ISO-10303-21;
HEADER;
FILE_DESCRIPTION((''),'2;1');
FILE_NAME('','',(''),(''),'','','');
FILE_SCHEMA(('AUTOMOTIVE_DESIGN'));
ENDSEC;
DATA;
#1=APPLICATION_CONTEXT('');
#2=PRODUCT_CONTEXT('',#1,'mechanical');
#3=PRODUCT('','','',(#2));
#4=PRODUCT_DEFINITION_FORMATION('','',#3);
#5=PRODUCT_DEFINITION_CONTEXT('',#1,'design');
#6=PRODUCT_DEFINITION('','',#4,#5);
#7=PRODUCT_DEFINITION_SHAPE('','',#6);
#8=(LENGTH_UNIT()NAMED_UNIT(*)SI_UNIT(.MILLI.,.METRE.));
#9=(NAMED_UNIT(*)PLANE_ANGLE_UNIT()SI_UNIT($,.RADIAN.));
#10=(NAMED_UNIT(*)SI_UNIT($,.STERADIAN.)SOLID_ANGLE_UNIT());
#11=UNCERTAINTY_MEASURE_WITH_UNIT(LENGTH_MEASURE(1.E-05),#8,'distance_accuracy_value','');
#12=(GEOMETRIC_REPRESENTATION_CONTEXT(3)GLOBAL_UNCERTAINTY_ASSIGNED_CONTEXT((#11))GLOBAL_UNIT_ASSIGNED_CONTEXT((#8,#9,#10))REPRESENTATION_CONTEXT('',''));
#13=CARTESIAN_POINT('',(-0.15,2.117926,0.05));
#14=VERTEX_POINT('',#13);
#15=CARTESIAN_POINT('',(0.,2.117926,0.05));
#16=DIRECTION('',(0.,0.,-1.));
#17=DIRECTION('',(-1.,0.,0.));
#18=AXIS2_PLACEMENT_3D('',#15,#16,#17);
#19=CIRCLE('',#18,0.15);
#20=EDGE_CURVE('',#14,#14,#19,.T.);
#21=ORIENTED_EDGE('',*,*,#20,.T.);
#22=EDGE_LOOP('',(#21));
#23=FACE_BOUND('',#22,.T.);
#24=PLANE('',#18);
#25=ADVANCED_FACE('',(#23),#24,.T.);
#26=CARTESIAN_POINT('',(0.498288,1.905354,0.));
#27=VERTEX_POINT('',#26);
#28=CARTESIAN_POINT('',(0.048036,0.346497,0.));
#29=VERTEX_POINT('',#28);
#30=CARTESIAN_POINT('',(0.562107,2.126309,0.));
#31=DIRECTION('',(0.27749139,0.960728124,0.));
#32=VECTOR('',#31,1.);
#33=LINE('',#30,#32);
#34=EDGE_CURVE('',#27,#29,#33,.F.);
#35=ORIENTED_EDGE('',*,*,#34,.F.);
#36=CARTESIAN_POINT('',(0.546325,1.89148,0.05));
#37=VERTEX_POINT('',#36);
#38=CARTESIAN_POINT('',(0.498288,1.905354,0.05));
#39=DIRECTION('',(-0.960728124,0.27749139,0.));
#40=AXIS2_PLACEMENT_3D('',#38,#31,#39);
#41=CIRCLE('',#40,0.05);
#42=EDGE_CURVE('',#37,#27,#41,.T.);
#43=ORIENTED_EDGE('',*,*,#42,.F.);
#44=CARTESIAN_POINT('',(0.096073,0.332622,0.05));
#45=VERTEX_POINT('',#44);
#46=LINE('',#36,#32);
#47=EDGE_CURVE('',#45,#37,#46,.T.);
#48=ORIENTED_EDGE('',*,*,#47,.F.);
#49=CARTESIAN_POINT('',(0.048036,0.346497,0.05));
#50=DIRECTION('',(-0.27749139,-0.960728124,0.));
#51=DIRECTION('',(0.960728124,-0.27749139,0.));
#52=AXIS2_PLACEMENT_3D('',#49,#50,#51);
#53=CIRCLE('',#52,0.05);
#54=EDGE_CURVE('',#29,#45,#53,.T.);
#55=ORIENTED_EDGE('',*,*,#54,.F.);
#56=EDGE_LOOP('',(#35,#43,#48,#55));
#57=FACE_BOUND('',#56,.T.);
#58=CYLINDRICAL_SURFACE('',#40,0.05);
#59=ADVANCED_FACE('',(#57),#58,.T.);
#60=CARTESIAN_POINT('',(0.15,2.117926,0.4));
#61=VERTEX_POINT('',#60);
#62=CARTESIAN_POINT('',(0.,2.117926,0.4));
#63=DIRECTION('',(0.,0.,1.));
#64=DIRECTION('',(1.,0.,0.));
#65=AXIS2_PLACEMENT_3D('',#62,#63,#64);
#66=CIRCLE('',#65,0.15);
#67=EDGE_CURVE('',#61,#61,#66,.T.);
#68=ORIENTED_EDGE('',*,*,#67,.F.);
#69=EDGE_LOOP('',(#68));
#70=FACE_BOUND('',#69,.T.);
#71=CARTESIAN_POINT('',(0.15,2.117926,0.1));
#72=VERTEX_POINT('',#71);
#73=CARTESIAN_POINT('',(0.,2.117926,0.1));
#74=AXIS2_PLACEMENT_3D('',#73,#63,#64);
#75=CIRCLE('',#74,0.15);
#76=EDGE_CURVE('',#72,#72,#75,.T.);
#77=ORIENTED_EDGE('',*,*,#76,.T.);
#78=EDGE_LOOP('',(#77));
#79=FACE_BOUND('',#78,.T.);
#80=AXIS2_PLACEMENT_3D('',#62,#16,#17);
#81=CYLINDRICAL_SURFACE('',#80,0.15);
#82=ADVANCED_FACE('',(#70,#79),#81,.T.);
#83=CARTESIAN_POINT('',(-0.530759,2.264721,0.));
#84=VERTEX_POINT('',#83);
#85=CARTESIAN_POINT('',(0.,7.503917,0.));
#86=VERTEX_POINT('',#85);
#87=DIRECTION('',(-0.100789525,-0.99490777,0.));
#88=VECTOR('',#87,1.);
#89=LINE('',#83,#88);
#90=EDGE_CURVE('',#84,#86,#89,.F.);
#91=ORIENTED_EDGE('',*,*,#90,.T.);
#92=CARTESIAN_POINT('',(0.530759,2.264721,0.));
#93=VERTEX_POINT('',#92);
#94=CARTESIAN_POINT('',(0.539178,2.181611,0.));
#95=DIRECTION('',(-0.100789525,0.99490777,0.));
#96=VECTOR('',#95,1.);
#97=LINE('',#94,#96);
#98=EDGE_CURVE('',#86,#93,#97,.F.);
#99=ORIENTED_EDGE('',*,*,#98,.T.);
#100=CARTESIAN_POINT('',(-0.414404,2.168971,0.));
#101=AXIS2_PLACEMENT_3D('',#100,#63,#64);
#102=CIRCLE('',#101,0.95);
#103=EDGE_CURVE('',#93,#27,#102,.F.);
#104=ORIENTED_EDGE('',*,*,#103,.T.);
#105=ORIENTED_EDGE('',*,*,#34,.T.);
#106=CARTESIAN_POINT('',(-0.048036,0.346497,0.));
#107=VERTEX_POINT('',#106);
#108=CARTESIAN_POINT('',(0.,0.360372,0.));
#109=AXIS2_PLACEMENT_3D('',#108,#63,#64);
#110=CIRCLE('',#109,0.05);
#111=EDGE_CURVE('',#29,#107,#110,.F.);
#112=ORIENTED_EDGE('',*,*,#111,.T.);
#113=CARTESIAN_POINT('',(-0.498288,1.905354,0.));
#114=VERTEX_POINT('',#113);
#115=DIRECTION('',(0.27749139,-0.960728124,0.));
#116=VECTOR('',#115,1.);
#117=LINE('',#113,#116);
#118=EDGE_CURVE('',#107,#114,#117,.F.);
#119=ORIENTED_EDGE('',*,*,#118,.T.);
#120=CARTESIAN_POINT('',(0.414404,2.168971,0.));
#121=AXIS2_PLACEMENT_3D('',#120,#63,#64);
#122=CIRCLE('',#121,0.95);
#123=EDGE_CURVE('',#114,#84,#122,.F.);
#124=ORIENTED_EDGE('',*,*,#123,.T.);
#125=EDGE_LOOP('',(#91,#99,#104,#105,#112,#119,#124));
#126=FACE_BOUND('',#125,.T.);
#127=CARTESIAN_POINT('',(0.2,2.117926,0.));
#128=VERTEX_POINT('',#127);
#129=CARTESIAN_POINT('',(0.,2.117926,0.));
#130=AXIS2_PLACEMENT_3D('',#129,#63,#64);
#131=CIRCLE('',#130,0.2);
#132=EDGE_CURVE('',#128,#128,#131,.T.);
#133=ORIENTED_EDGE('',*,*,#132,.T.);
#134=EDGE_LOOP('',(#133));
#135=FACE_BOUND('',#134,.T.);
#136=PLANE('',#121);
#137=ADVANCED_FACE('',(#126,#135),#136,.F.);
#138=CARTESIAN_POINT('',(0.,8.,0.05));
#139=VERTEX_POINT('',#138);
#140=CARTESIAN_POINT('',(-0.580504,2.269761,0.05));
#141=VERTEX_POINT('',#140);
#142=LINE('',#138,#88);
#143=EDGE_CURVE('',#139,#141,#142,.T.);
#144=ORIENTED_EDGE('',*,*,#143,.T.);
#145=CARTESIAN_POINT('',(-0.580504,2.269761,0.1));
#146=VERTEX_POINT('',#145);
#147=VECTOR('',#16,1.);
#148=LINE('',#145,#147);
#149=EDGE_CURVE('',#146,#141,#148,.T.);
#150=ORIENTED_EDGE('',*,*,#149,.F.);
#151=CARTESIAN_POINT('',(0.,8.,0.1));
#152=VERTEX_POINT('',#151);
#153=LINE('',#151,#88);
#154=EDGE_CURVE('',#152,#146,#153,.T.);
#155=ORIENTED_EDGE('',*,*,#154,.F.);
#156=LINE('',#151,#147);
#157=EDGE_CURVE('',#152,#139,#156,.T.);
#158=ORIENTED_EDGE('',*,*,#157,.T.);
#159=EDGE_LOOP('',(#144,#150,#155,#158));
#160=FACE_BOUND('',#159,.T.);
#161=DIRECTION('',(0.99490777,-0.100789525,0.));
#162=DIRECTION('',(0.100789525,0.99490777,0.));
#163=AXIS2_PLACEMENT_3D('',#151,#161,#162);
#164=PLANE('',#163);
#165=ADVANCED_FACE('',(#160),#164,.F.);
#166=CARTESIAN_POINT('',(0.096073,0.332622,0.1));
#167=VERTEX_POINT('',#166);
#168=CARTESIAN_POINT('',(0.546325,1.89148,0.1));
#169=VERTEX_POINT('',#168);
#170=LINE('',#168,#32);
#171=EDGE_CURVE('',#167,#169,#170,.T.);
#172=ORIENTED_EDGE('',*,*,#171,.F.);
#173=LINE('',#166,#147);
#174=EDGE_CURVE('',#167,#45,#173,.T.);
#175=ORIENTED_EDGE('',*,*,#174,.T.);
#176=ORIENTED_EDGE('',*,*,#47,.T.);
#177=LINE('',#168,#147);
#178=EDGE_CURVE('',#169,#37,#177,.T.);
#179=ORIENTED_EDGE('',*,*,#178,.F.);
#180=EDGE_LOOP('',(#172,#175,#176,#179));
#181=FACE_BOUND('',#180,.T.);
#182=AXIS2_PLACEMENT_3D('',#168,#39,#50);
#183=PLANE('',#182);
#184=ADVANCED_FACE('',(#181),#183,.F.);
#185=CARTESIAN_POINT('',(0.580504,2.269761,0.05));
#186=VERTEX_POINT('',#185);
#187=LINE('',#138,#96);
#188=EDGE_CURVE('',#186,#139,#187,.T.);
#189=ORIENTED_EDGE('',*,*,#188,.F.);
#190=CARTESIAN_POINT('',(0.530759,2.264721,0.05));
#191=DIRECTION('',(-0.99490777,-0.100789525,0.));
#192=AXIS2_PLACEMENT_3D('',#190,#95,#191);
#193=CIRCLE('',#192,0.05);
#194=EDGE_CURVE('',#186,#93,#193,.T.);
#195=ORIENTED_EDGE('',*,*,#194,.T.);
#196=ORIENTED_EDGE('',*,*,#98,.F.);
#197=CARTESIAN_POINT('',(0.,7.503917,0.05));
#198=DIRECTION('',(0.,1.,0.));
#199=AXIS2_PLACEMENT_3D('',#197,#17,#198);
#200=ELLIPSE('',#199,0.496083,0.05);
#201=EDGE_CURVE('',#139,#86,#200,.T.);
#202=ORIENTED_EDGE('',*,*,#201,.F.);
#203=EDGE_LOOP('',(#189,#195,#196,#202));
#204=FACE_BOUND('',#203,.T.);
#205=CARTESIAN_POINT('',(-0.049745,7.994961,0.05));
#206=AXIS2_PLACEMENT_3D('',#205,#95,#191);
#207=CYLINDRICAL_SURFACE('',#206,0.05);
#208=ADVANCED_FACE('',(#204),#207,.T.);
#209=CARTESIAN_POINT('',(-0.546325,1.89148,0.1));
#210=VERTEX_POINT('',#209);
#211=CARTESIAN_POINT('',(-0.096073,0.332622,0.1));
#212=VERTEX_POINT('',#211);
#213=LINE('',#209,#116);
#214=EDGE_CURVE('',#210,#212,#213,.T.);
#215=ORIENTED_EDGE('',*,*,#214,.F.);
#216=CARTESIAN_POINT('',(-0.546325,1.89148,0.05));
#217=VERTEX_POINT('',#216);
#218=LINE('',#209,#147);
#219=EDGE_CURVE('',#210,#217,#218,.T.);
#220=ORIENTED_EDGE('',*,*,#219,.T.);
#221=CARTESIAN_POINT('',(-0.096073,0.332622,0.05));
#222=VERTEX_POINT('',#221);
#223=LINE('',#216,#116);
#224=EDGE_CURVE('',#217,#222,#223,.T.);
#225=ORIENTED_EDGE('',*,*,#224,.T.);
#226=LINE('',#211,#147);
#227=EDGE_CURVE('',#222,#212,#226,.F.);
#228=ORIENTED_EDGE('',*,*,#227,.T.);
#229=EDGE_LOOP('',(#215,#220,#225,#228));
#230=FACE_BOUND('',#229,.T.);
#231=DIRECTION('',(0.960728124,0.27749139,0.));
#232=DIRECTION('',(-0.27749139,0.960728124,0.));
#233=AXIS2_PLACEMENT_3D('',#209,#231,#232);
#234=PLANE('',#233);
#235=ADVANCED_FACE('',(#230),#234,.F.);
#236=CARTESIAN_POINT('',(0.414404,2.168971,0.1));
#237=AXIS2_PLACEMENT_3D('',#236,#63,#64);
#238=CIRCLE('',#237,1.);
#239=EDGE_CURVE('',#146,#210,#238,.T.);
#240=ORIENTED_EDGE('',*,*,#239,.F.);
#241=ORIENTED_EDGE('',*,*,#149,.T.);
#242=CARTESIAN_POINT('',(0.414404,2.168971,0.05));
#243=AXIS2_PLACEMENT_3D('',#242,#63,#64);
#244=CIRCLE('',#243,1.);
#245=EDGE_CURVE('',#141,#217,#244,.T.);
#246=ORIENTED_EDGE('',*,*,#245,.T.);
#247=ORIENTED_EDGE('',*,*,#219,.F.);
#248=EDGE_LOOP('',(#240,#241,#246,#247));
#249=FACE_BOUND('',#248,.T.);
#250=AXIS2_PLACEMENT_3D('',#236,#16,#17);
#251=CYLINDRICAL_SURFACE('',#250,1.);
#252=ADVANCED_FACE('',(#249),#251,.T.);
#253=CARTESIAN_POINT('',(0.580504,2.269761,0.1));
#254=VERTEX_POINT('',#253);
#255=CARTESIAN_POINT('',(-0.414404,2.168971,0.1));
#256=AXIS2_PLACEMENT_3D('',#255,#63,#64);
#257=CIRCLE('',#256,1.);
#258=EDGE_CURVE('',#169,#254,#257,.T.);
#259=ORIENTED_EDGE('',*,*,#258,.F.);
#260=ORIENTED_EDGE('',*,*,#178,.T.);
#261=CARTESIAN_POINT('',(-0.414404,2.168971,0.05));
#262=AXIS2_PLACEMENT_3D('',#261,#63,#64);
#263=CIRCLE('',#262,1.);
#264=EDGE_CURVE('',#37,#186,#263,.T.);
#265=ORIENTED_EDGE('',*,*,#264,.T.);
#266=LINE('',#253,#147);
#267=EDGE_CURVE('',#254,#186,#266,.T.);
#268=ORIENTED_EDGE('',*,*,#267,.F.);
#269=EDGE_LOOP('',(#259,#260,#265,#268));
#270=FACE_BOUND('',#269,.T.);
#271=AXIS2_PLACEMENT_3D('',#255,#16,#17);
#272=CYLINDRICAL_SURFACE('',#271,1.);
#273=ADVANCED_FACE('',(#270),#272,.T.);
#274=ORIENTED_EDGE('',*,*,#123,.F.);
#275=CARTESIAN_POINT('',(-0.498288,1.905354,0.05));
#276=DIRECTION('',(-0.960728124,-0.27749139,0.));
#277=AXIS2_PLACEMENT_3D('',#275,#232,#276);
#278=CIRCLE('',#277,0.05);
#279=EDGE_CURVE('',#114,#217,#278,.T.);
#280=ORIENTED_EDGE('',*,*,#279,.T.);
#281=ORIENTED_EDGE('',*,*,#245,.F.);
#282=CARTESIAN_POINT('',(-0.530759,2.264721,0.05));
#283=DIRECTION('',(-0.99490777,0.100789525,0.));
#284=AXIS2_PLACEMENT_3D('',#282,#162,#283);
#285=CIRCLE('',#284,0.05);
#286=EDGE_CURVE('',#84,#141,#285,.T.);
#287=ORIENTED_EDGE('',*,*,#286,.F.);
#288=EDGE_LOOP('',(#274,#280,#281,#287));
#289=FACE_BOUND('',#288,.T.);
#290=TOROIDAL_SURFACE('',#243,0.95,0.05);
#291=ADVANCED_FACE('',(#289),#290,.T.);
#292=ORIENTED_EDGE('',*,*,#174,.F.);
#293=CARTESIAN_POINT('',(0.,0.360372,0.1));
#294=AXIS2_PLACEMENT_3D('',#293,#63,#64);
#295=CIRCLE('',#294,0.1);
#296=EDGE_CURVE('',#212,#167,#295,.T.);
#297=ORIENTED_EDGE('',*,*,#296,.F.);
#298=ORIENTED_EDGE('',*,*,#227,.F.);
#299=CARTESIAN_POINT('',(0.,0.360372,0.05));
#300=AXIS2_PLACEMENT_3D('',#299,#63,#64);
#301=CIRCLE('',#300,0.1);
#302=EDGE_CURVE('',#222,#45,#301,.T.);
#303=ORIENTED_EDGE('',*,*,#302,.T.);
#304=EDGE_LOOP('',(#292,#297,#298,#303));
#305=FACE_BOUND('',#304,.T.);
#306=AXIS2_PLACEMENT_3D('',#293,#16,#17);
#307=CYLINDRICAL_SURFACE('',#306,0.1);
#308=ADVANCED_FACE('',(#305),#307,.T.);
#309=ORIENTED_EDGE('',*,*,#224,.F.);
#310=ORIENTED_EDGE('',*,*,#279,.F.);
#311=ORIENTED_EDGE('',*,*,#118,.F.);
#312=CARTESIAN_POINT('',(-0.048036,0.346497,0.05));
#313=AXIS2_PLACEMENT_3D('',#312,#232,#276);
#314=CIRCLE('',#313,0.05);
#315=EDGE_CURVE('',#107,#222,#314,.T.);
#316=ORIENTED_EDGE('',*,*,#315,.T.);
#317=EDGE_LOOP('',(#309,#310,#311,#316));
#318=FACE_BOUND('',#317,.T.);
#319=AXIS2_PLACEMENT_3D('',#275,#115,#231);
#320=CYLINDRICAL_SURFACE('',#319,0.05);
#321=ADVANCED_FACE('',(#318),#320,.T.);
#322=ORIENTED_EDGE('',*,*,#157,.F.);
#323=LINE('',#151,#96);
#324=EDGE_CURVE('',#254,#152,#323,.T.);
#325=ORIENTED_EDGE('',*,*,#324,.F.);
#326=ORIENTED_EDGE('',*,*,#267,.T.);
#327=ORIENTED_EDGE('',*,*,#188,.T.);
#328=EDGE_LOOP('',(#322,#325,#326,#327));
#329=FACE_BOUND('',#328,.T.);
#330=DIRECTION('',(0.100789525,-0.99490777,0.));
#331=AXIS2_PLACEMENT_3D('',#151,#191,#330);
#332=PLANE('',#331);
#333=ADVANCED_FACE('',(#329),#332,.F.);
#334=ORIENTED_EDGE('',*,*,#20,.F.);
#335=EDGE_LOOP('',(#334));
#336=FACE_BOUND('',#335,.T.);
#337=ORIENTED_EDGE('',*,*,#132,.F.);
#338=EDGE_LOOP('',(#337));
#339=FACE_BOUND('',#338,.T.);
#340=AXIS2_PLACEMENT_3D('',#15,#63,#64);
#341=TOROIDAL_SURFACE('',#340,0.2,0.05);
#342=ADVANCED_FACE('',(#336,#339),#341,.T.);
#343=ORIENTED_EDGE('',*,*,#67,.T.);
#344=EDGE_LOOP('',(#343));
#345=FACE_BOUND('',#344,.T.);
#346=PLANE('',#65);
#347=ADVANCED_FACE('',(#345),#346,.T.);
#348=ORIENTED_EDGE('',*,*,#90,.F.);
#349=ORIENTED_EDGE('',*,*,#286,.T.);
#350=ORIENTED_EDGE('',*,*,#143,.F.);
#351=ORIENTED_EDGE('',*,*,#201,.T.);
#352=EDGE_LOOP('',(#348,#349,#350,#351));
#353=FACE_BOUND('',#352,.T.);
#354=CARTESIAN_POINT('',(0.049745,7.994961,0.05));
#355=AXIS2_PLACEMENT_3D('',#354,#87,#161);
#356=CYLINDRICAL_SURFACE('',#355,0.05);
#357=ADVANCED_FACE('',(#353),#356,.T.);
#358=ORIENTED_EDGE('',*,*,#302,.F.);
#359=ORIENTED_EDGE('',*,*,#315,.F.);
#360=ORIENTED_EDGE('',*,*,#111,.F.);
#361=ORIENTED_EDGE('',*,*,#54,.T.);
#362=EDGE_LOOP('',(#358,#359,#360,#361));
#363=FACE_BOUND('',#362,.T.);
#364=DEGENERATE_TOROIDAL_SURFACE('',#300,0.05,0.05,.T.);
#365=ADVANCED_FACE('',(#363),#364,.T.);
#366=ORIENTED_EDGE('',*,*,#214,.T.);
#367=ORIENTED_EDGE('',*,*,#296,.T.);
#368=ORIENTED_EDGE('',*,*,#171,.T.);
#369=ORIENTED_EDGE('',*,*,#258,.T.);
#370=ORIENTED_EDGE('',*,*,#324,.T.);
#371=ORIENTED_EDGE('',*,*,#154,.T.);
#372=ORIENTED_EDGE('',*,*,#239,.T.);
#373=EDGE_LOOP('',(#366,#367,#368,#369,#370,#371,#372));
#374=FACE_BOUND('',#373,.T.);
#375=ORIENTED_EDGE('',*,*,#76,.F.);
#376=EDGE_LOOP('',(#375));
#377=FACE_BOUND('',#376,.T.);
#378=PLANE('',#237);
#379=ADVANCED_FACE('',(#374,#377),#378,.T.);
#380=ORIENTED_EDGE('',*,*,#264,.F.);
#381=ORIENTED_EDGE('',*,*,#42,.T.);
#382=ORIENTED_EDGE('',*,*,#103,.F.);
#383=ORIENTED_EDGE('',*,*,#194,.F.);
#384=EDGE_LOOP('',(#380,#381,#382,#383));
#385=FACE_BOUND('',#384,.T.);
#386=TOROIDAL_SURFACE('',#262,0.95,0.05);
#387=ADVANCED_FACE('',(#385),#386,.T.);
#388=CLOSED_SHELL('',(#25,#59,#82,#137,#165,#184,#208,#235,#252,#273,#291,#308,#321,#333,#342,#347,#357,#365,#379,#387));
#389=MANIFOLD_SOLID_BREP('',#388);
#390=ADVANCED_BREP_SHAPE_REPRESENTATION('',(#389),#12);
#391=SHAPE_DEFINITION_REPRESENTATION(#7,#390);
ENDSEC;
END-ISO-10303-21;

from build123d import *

# Parameters (mm, degrees)
EXTRUDE_1_DEPTH     = 0.1
SKETCH_2_R          = 0.15
EXTRUDE_2_DEPTH     = 0.3
FILLET_1_R          = 0.1
FILLET_3_R          = 0.05
SKETCH_3_R          = 0.15
CUT_EXTRUDE_1_DEPTH = 0.05
FILLET_4_R          = 0.05


with BuildPart() as part:
    # Эскиз1 → Бобышка-Вытянуть1 (new body)
    with BuildSketch(Plane.XY):
        with BuildLine():
            Line((0, 8), (-0.580504166, 2.26976061))
            ThreePointArc((-0.580504166, 2.26976061), (-0.58153919, 2.078982478), (-0.546324519, 1.891479695))
            Line((-0.546324519, 1.891479695), (0, 0))
            Line((0, 0), (0.546324519, 1.891479695))
            ThreePointArc((0.546324519, 1.891479695), (0.58153919, 2.078982478), (0.580504166, 2.26976061))
            Line((0.580504166, 2.26976061), (0, 8))
        make_face()
    extrude(amount=EXTRUDE_1_DEPTH)

    # Эскиз2 → Бобышка-Вытянуть2 (add)
    with BuildSketch(Plane.XY.offset(0.1)):
        with Locations((0, 2.117926147)):
            Circle(SKETCH_2_R)
    extrude(amount=EXTRUDE_2_DEPTH)

    # Скругление1
    fillet_1_edges = [part.edges().sort_by_distance(p)[0] for p in [
        (0, 0, 0.05),
    ]]
    fillet(fillet_1_edges, radius=FILLET_1_R)

    # Скругление3
    fillet_3_edges = [part.edges().sort_by_distance(p)[0] for p in [
        (0.321198666, 1.112051048, 0),
        (0, 0.260371541, 0),
        (-0.321198666, 1.112051048, 0),
        (-0.58153919, 2.078982478, 0),
        (-0.290252083, 5.134880305, 0),
        (0.290252083, 5.134880305, 0),
        (0.58153919, 2.078982478, 0),
    ]]
    fillet(fillet_3_edges, radius=FILLET_3_R)

    # Эскиз3 → Вырез-Вытянуть1 (cut)
    with BuildSketch(Plane(origin=(0, 0, 0), x_dir=(-1, 0, 0), z_dir=(0, 0, -1))):
        with Locations(Location((0, 2.117926147, 0), (0, 0, 180))):
            Circle(SKETCH_3_R)
    extrude(amount=-CUT_EXTRUDE_1_DEPTH, mode=Mode.SUBTRACT)

    # Скругление4
    fillet_4_edges = [part.edges().sort_by_distance(p)[0] for p in [
        (-0.15, 2.117926147, 0),
    ]]
    fillet(fillet_4_edges, radius=FILLET_4_R - 0.0001)  # a hair under: the kernel refuses the full size


solid = part.part
